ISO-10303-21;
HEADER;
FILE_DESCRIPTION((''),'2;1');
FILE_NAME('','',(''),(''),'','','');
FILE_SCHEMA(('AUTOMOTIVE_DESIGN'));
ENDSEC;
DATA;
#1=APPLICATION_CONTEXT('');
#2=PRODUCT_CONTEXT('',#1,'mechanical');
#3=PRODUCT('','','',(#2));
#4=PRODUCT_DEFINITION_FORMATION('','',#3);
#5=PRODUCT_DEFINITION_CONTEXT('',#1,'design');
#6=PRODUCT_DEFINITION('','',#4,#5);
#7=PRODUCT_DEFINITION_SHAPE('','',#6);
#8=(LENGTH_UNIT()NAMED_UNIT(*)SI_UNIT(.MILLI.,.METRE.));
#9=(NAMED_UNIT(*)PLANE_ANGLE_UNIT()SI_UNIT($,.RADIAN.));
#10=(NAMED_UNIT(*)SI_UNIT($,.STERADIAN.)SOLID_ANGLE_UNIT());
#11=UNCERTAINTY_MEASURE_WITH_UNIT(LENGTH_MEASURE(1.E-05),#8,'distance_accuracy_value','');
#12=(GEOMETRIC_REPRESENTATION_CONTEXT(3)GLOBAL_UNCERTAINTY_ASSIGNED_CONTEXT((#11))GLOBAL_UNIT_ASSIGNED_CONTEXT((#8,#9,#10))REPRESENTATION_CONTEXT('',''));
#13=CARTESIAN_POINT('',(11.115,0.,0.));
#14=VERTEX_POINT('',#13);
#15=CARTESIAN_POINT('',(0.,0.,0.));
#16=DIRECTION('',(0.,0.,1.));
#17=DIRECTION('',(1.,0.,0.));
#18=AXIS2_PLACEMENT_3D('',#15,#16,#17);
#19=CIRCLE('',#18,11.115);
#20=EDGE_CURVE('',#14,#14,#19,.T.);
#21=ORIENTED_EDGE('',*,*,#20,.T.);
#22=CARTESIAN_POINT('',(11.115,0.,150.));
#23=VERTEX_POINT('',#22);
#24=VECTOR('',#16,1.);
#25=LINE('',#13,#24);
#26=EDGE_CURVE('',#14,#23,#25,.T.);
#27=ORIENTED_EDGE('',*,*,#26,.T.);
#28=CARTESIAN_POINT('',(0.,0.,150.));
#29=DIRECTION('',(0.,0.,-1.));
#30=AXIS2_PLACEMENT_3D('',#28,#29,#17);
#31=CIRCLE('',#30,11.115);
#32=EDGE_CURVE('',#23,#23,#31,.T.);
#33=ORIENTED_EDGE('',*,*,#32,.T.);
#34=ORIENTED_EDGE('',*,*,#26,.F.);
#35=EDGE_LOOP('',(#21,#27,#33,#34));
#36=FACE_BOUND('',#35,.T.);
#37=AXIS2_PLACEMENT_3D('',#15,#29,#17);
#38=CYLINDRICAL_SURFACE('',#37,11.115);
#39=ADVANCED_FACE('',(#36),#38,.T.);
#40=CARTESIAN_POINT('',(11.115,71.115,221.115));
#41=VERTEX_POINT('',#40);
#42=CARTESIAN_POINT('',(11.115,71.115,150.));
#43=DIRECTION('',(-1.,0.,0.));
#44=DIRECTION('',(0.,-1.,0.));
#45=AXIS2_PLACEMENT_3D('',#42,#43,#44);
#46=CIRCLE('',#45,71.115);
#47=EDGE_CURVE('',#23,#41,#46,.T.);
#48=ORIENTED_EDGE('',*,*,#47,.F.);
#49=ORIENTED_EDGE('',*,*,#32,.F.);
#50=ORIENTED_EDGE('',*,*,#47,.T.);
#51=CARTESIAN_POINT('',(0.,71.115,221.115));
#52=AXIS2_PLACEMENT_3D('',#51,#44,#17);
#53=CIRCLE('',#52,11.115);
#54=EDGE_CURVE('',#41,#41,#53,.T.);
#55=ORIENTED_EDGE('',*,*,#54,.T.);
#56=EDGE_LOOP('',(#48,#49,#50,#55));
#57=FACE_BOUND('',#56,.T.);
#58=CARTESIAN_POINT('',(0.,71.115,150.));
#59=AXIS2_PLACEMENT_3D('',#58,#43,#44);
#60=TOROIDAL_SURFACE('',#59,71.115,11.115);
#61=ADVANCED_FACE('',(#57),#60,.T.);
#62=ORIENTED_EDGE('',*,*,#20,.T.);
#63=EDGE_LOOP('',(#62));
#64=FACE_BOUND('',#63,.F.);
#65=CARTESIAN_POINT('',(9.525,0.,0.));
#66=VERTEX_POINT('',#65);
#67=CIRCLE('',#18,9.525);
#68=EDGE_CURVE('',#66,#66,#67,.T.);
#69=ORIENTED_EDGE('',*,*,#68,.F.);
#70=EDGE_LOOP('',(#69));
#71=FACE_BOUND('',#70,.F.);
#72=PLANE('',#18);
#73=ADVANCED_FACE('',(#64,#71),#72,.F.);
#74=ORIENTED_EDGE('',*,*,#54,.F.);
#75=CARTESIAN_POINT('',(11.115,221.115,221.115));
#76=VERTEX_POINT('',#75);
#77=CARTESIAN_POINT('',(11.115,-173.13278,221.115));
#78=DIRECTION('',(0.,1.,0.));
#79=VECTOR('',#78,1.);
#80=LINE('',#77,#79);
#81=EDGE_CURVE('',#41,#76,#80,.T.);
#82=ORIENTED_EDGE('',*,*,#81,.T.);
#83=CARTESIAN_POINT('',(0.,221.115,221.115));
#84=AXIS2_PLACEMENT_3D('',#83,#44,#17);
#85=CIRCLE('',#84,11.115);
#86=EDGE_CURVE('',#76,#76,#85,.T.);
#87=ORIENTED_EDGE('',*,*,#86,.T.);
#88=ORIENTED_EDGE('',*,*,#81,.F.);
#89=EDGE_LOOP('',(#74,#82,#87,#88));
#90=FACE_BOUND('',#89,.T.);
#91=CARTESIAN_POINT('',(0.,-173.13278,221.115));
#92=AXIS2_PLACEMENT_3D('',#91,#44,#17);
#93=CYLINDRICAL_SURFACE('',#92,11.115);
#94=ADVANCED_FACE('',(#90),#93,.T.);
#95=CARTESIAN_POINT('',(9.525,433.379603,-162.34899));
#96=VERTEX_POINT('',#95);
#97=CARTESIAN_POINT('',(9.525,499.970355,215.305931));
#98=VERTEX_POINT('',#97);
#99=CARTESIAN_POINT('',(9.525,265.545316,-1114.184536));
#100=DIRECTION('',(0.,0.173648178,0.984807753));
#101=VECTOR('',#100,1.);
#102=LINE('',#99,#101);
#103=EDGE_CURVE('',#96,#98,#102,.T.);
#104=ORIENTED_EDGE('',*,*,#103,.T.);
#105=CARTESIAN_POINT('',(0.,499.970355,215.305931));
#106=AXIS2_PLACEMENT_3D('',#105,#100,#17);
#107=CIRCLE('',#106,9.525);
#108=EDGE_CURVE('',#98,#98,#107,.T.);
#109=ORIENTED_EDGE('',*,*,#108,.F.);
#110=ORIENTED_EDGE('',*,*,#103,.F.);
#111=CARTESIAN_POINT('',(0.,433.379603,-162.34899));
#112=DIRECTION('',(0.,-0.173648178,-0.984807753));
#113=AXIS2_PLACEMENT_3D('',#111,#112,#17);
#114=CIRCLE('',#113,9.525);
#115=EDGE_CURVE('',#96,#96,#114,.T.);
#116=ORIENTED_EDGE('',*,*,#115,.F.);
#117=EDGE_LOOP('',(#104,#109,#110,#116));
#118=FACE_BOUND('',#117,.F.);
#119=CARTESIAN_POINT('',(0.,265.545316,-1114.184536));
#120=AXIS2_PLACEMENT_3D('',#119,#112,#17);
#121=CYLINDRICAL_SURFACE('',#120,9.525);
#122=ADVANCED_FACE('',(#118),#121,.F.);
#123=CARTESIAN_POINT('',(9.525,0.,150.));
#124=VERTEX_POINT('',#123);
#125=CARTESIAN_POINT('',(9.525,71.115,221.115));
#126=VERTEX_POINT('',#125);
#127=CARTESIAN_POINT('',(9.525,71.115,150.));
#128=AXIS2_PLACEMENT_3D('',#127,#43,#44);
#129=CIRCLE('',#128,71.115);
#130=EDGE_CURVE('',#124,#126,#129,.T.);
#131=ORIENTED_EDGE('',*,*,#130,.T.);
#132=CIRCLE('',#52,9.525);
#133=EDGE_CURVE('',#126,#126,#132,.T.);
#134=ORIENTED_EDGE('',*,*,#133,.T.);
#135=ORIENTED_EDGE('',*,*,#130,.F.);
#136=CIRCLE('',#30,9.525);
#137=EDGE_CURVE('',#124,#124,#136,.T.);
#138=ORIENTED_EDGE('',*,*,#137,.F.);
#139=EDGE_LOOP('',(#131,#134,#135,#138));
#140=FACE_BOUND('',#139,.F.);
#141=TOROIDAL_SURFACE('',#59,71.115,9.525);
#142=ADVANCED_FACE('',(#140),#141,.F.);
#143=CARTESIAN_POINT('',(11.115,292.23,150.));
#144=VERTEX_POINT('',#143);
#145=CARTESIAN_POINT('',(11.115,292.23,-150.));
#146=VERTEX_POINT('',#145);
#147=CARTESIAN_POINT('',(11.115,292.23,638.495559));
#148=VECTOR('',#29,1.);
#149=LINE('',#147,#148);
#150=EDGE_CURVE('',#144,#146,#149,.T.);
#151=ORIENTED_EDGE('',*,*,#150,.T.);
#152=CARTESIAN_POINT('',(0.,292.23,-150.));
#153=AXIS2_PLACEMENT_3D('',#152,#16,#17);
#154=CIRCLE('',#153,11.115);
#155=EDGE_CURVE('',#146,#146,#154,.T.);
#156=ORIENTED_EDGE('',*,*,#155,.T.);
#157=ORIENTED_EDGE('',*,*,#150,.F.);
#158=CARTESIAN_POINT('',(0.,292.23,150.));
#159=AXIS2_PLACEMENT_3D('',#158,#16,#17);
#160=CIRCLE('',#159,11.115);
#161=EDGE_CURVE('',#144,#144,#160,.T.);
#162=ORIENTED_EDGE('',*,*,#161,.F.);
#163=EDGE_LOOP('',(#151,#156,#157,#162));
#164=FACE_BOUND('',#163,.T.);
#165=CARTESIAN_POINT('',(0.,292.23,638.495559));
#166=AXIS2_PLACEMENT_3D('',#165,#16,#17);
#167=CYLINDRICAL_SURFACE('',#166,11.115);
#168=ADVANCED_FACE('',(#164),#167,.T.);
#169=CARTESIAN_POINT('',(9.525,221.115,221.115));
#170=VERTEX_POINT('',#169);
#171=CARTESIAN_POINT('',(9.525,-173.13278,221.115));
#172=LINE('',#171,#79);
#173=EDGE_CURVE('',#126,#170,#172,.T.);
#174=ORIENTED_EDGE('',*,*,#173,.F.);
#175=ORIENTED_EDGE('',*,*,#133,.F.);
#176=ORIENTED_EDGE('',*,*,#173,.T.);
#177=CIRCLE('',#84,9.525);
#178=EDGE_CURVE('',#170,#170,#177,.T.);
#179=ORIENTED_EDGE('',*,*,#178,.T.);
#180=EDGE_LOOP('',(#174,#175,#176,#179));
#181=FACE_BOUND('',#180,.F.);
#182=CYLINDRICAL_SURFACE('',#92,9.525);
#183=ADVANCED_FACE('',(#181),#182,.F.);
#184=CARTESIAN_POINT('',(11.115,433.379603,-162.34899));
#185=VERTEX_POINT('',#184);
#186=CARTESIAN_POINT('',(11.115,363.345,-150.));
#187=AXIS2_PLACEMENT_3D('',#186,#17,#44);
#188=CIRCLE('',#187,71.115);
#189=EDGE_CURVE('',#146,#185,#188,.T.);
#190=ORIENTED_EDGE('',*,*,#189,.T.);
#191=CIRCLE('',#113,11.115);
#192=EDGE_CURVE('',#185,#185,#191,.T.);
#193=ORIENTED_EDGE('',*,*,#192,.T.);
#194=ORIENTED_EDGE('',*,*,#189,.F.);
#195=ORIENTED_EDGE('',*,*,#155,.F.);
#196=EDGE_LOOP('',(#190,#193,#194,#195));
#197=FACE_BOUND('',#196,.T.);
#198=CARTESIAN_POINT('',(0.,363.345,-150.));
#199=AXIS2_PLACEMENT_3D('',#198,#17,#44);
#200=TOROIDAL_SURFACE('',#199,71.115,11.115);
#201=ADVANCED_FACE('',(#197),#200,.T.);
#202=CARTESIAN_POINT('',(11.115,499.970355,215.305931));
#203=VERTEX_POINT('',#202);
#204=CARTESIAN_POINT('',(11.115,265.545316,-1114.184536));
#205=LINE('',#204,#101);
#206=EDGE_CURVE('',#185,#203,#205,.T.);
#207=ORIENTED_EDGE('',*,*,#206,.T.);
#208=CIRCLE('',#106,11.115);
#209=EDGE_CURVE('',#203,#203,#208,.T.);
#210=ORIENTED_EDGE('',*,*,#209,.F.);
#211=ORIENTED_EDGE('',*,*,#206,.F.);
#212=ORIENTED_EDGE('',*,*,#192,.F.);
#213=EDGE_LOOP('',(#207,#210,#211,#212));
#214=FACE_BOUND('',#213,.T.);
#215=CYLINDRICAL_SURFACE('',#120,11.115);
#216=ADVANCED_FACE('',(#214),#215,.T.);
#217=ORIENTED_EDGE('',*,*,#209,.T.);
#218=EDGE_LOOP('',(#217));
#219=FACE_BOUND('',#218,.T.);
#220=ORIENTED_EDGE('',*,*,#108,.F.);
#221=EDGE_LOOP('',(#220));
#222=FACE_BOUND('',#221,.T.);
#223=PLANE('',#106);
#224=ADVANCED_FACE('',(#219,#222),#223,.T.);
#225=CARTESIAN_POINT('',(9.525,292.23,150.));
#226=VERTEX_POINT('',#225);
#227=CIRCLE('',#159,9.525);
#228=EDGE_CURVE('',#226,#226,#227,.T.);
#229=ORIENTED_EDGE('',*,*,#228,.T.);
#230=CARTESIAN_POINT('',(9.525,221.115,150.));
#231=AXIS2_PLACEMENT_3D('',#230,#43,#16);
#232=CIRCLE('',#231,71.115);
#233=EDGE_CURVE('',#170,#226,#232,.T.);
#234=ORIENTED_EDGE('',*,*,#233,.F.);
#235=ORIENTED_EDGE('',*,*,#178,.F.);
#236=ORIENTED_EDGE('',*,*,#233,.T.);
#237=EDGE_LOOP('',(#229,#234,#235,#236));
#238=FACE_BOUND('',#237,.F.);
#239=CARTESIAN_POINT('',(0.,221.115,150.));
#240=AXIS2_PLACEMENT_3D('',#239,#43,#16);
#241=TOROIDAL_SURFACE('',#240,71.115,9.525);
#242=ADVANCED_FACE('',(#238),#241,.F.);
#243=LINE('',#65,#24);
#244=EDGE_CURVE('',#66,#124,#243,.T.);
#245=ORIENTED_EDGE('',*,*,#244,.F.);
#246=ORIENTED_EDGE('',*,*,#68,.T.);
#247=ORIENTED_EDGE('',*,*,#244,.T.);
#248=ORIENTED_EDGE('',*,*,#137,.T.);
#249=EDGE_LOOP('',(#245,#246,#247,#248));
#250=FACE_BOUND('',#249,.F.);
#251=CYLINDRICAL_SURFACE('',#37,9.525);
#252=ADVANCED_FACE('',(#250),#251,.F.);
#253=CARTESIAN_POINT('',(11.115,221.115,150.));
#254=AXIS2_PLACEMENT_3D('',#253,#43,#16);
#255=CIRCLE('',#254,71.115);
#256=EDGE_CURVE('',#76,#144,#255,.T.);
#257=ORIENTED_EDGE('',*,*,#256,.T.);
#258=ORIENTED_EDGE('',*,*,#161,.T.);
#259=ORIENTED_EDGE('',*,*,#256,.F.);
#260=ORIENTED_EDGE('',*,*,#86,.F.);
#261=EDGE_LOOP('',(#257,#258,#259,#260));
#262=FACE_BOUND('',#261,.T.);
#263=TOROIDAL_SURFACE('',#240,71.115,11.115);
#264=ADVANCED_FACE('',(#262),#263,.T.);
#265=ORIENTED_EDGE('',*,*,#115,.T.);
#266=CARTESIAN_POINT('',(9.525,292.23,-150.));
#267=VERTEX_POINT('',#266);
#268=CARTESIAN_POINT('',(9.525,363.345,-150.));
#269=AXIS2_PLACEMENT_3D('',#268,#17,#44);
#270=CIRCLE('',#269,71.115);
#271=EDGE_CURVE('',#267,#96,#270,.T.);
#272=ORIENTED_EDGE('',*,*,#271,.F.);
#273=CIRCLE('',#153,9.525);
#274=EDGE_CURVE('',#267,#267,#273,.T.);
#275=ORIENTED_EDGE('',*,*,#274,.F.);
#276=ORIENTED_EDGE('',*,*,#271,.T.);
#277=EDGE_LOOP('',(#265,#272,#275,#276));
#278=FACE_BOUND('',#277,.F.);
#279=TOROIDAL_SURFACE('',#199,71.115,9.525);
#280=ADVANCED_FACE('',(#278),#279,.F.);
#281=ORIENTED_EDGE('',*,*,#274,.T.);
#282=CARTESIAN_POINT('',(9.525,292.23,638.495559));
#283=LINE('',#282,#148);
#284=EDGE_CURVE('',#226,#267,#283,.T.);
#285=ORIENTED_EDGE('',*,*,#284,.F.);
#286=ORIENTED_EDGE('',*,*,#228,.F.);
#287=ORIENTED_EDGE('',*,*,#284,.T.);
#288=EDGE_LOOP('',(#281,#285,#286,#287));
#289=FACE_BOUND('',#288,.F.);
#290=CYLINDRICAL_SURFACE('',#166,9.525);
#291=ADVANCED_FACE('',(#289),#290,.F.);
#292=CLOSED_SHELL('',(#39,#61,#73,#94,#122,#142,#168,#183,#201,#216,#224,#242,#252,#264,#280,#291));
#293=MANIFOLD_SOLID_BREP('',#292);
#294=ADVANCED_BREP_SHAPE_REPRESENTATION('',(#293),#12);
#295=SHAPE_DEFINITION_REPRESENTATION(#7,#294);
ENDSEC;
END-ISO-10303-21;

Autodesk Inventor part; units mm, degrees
sketch "Esboço10" plane through (0, 0, 0) normal (0, 0, 1) x (1, 0, 0)
  circle A0 centre (0, 0) radius 9.525
  circle A1 centre (0, 0) radius 11.115
  dimension "d35" = 19.05
  dimension "d36" = 1.59
extrude "Extrusão3" add sketch "Esboço10" along normal blind 1350
ref_plane "Plano de trabalho10" through (0, 11.115, 0) normal (0, 1, 0) x (-1, 0, 0)
sketch "Esboço17" plane through (0, 11.115, 0) normal (0, 1, 0) x (-1, 0, 0)
  line L0 (11.115, 0) -> (11.115, 1350) projected
  line L1 (11.115, 150) -> (-11.115, 150)
  line L2 (-11.115, 0) -> (-11.115, 1350) projected
  line L3 (-11.115, 0) -> (11.115, 0) projected
  point P0 (0, 0)
  dimension "d62" = 150
bend part "Vergar peça7" radius 60 angle 90 line through (-11.115, 11.115, 150) along (1, 0, 0) centre toward (0, 1, 0) moving side (0, 0, 1) both sides no
ref_plane "Plano de trabalho11" through (0, -173.1328, 210) normal (0, 0, 1) x (1, 0, 0)
sketch "Esboço18" plane through (0, -173.1328, 210) normal (0, 0, 1) x (1, 0, 0)
  line L0 (11.115, 244.2478) -> (11.115, 1350) projected
  line L1 (11.115, 394.2478) -> (-11.115, 394.2478)
  line L2 (-11.115, 244.2478) -> (-11.115, 1350) projected
  line L3 (11.115, 244.2478) -> (-11.115, 244.2478) projected
  point P0 (0, 173.1328)
  dimension "d65" = 150
bend part "Vergar peça8" radius 60 angle 90 line through (11.115, 221.115, 210) along (-1, 0, 0) centre toward (0, 0, -1) moving side (0, 1, 0) both sides no
ref_plane "Plano de trabalho12" through (0, 303.345, 638.4956) normal (0, 1, 0) x (-1, 0, 0)
sketch "Esboço19" plane through (0, 303.345, 638.4956) normal (0, 1, 0) x (-1, 0, 0)
  line L0 (-11.115, -488.4956) -> (-11.115, -1350) projected
  line L1 (-11.115, -788.4956) -> (11.115, -788.4956)
  line L2 (11.115, -488.4956) -> (11.115, -1350) projected
  line L3 (-11.115, -488.4956) -> (11.115, -488.4956) projected
  point P0 (0, -638.4956)
  dimension "d68" = 300
bend part "Vergar peça9" radius 60 angle 170 line through (11.115, 303.345, -150) along (-1, 0, 0) centre toward (0, 1, 0) moving side (0, 0, -1) both sides no
properties part number "Front support" material "Aço inoxidável, polido"
